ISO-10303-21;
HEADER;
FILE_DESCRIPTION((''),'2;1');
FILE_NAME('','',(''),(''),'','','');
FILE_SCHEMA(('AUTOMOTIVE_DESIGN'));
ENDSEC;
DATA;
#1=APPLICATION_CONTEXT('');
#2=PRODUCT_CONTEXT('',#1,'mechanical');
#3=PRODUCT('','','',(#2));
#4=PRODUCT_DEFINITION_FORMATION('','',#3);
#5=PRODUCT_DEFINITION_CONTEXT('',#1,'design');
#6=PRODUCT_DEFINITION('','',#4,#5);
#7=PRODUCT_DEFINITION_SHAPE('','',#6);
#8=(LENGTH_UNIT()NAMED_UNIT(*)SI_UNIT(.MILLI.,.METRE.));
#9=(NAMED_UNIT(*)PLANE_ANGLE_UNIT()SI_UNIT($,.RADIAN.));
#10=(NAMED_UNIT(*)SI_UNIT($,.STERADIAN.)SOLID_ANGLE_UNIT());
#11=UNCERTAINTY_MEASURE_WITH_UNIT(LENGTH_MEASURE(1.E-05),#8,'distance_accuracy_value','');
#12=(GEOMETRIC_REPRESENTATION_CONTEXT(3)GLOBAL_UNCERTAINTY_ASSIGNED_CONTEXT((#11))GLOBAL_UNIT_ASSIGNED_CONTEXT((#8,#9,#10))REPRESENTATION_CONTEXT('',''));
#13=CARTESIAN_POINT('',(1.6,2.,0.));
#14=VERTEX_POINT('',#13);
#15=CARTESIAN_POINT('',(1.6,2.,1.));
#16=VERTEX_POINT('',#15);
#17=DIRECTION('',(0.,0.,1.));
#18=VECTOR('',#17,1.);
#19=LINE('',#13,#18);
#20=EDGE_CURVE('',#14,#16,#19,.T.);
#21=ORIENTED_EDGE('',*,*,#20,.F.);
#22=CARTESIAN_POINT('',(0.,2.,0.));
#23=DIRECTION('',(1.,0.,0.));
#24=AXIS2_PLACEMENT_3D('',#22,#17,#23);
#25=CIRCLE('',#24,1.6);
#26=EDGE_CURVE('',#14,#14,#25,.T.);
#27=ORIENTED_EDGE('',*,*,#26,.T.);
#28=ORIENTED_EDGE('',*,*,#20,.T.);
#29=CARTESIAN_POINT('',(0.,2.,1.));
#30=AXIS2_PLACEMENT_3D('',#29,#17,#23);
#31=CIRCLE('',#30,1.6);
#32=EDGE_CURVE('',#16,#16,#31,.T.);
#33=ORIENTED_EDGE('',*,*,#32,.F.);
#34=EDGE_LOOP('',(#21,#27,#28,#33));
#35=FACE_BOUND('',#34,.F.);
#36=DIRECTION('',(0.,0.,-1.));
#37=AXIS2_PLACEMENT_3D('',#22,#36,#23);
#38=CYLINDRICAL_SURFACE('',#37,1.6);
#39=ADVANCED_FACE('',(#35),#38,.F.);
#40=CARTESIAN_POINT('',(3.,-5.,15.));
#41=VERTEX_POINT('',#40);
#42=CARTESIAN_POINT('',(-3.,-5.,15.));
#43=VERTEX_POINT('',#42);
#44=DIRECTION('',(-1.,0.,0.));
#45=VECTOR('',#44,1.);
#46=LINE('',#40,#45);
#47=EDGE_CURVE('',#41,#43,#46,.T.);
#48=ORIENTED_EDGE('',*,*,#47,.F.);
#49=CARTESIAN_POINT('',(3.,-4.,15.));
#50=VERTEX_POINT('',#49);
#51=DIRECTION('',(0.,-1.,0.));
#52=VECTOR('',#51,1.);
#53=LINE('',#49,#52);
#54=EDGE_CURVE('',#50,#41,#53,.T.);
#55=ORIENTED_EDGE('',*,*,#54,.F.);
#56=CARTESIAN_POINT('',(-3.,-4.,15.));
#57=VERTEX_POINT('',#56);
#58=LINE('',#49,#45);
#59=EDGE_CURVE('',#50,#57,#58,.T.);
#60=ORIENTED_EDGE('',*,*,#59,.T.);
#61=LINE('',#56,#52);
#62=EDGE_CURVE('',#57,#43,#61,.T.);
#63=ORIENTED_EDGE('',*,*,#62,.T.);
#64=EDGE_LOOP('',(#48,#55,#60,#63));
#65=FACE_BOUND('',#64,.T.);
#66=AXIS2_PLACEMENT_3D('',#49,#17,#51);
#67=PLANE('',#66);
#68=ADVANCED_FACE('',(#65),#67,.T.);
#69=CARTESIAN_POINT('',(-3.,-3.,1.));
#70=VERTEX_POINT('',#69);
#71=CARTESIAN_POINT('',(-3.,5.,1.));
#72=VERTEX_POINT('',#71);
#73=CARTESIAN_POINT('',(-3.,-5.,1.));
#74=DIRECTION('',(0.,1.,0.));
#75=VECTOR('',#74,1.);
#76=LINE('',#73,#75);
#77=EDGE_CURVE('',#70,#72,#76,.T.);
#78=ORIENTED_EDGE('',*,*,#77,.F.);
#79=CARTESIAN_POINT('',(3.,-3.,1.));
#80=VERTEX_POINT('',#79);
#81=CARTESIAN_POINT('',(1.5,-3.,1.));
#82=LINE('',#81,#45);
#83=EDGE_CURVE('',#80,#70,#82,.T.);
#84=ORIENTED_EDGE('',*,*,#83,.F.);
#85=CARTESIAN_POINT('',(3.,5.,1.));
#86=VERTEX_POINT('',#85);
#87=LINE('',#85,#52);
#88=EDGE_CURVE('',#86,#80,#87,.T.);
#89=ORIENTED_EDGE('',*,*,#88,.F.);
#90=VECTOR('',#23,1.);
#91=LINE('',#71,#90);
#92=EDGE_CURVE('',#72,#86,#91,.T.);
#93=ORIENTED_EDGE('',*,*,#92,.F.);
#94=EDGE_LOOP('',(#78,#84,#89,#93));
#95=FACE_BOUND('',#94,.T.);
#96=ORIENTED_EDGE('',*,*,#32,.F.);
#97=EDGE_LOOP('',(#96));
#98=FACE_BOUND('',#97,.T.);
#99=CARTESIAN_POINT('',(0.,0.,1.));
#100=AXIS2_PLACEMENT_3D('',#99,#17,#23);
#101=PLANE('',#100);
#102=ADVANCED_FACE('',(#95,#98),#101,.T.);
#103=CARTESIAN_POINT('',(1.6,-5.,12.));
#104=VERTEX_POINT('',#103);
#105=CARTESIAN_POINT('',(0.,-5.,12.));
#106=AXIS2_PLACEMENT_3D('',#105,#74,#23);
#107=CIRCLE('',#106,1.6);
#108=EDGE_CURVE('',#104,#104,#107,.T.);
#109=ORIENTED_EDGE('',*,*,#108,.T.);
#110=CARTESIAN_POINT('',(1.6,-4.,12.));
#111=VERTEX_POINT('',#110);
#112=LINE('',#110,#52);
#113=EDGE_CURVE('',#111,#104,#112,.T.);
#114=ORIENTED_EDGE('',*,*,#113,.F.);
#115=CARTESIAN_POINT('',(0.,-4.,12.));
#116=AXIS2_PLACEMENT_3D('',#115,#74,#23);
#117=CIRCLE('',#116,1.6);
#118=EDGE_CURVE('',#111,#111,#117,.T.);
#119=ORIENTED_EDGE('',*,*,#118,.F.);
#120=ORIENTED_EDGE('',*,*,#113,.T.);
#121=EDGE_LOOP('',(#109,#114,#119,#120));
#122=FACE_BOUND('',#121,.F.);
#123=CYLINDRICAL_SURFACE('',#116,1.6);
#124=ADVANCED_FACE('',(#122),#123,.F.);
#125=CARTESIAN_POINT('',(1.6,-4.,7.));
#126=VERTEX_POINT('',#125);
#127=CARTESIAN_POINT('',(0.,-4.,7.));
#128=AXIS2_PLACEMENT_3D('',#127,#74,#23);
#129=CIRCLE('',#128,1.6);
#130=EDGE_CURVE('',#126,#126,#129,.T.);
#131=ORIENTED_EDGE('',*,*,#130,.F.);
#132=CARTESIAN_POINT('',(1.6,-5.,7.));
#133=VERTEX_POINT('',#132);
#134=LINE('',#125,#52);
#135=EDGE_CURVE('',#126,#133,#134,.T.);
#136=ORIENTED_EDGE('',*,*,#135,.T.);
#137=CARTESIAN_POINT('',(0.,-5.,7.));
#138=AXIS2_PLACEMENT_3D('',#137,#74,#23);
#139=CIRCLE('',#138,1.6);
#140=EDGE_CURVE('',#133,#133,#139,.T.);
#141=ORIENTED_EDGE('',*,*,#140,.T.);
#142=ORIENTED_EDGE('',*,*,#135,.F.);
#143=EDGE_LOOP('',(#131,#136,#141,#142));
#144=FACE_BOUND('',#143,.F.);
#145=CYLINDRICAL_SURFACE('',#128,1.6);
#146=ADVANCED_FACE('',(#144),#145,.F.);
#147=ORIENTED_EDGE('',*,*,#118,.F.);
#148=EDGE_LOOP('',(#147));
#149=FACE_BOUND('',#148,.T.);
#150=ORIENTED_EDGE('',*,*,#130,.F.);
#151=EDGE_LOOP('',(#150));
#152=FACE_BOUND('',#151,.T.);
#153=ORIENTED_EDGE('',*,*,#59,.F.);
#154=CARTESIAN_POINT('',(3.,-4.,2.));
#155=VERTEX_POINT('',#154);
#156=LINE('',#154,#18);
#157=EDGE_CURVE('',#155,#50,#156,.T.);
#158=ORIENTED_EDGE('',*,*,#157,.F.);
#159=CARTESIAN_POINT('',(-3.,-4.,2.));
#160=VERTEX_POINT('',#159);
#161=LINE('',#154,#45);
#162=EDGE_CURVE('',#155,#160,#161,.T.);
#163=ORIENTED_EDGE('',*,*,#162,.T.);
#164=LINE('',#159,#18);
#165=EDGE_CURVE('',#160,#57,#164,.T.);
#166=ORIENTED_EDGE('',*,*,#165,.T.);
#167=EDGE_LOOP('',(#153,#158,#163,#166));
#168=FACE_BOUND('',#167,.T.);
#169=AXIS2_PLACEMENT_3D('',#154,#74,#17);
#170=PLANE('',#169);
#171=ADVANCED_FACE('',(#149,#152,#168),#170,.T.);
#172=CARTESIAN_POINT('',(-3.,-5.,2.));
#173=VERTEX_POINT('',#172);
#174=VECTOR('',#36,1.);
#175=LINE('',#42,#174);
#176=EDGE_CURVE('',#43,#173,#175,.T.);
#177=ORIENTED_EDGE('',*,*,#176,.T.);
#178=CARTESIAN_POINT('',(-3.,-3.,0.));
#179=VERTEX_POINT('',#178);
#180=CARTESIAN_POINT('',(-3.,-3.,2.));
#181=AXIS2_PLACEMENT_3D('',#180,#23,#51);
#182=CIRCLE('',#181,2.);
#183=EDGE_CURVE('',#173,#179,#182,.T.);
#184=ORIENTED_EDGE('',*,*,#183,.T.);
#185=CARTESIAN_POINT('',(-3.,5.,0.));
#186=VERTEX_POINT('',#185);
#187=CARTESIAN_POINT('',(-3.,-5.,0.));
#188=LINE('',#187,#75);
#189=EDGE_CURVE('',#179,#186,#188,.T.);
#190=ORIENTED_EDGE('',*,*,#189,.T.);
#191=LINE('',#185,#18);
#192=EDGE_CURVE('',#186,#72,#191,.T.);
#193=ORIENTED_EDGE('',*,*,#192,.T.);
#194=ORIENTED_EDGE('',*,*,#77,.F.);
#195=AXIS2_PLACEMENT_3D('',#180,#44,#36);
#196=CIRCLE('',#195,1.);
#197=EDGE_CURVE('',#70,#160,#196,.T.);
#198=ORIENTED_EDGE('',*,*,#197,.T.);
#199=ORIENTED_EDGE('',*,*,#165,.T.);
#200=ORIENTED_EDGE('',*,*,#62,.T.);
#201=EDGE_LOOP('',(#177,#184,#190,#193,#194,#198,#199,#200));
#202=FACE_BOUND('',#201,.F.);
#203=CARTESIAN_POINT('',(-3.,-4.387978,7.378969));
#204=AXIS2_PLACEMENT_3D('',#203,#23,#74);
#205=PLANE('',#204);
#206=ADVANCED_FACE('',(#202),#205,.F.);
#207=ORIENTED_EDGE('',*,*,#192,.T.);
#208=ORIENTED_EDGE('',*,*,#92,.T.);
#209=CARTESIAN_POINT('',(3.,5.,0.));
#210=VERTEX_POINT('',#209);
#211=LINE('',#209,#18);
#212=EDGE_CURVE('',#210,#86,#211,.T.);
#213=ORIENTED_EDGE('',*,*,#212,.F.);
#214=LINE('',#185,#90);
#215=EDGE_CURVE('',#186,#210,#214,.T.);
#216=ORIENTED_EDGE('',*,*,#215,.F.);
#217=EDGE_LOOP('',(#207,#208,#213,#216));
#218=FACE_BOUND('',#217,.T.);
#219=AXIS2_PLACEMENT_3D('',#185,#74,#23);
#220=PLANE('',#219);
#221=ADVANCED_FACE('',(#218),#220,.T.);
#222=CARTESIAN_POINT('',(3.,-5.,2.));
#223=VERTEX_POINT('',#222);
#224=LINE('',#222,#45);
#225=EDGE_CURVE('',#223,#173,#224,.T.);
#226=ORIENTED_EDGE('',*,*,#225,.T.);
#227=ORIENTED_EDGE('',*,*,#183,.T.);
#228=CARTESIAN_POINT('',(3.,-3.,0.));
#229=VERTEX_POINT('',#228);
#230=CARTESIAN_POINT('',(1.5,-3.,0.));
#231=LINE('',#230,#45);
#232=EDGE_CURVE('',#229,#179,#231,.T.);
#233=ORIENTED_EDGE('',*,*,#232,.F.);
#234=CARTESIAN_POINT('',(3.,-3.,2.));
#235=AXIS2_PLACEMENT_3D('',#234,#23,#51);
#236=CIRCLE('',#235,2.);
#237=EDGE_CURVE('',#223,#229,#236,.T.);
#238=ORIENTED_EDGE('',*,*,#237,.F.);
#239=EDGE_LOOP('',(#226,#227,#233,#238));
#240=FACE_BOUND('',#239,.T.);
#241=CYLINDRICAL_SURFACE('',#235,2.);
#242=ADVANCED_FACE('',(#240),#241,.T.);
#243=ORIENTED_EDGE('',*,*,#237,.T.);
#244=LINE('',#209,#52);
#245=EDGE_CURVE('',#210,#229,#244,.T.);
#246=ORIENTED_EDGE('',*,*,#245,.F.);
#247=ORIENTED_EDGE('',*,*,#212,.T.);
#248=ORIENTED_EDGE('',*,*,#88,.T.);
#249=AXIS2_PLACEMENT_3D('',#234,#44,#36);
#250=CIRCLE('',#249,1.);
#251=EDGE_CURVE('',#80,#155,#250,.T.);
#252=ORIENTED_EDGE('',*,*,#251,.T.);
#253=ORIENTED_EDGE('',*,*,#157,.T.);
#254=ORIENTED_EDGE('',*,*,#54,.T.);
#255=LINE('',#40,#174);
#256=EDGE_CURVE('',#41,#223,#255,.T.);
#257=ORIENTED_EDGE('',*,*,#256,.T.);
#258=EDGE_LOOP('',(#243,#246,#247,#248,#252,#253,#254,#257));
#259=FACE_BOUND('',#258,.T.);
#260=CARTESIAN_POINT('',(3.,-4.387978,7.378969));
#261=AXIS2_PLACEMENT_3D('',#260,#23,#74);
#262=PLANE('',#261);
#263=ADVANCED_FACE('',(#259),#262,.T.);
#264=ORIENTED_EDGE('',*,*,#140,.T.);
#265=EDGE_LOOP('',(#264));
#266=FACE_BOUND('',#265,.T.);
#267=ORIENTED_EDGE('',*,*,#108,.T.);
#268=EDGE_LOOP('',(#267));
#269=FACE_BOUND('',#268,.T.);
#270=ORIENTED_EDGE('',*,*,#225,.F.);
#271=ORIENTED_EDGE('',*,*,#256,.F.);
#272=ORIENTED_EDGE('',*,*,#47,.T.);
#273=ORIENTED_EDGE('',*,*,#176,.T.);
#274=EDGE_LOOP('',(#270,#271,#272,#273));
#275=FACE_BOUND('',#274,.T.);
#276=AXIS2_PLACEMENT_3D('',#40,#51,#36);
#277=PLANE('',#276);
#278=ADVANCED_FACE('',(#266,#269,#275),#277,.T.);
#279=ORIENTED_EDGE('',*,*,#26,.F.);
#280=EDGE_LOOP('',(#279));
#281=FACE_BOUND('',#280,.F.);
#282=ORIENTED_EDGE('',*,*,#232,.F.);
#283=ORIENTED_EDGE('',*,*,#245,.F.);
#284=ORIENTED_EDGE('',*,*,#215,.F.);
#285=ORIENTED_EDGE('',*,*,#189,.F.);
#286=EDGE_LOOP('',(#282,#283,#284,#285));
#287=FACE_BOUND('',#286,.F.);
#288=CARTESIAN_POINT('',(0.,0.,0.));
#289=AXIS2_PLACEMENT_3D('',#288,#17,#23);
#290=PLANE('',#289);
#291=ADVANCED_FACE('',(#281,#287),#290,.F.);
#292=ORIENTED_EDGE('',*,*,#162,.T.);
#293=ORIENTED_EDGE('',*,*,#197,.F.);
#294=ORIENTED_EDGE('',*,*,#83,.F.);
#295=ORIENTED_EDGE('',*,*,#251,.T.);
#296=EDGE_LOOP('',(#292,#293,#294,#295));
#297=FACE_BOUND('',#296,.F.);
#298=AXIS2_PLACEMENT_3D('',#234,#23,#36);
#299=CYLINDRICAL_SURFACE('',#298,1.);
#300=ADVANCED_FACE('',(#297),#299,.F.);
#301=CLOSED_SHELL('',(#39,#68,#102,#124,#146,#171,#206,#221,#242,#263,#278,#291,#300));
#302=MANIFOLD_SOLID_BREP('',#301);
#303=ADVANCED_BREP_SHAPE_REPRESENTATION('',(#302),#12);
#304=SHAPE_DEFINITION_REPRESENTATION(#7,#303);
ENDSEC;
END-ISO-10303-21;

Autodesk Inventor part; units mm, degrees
ref_plane "YZ Plane" through (0, 0, 0) normal (1, 0, 0) x (0, 1, 0)
ref_plane "XZ Plane" through (0, 0, 0) normal (0, 1, 0) x (-1, 0, 0)
ref_plane "XY Plane" through (0, 0, 0) normal (0, 0, 1) x (1, 0, 0)
sketch "Sketch1" plane through (0, 0, 0) normal (0, 0, 1) x (1, 0, 0)
  line L0 (-3, 5) -> (3, 5)
  line L1 (3, 5) -> (3, -5)
  line L2 (3, -5) -> (-3, -5)
  line L3 (-3, -5) -> (-3, 5)
  line L4 (-3, 5) -> (3, -5) construction
  line L5 (3, 5) -> (-3, -5) construction
  circle A0 centre (0, 2) radius 1.6
  point P0 (0, 0)
  dimension "d0" = 10
  dimension "d1" = 6
  dimension "d3" = 3.2
  dimension "d4" = 3
extrude "Plate1" add sketch "Sketch1" along normal blind 1
sketch "Sketch2" plane through (3, -4, 0) normal (0, -1, 0) x (1, 0, 0)
  line L0 (-6, 0) -> (0, 0)
  line L1 (0, 0) -> (0, 15)
  line L2 (0, 15) -> (-6, 15)
  line L3 (-6, 15) -> (-6, 0)
edge flange "Flange1" height 15 angle 90 thickness 1 bend radius 1 thickness toward (0, -1, 0) relief tear relief width 1 relief depth 0.5 edges at (0, -5, 1) wall of the first edge with corners at (-3, -4, 0) (3, -4, 0) (3, -4, 15) (-3, -4, 15)
bend "Bend1"
corner "Corner1"
sketch "Sketch3" plane through (-3, -4, 15) normal (0, 1, 0) x (1, 0, 0)
  circle A0 centre (3, 3) radius 1.6
  circle A1 centre (3, 8) radius 1.6
  line L0 (0, 0) -> (6, 0) projected
  point P0 (3, 15)
  point P1 (3, 0)
  dimension "d15" = 3.2
  dimension "d16" = 3.2
  dimension "d17" = 5
  dimension "d18" = 3
extrude "Cut1" cut sketch "Sketch3" against normal blind 1
equation "\"d19\" = 厚度"
equation "\"d2\" = 厚度"
equation "\"d5\" = 折彎離隙寬度"
equation "\"d6\" = 折彎離隙深度"
equation "\"d7\" = 最小剩餘"
equation "\"d8\" = 轉移半徑"
equation "\"d11\" = 折彎半徑"
equation "\"d12\" = 轉角離隙大小"
equation "\"d13\" = 間隙大小"
equation "\"d14\" = Jacobi半徑大小"
equation "\"折彎半徑\" = 厚度"
equation "\"折彎離隙寬度\" = 厚度"
equation "\"折彎離隙深度\" = 0.5 * 厚度"
equation "\"轉角離隙大小\" = 4 * 厚度"
equation "\"最小剩餘\" = 2 * 厚度"
equation "\"轉移半徑\" = 折彎半徑"
equation "\"Jacobi半徑大小\" = 折彎半徑"
equation "\"間隙大小\" = 厚度"
equation "\"厚度\" = 1"
properties part number "connector2_cooler"
